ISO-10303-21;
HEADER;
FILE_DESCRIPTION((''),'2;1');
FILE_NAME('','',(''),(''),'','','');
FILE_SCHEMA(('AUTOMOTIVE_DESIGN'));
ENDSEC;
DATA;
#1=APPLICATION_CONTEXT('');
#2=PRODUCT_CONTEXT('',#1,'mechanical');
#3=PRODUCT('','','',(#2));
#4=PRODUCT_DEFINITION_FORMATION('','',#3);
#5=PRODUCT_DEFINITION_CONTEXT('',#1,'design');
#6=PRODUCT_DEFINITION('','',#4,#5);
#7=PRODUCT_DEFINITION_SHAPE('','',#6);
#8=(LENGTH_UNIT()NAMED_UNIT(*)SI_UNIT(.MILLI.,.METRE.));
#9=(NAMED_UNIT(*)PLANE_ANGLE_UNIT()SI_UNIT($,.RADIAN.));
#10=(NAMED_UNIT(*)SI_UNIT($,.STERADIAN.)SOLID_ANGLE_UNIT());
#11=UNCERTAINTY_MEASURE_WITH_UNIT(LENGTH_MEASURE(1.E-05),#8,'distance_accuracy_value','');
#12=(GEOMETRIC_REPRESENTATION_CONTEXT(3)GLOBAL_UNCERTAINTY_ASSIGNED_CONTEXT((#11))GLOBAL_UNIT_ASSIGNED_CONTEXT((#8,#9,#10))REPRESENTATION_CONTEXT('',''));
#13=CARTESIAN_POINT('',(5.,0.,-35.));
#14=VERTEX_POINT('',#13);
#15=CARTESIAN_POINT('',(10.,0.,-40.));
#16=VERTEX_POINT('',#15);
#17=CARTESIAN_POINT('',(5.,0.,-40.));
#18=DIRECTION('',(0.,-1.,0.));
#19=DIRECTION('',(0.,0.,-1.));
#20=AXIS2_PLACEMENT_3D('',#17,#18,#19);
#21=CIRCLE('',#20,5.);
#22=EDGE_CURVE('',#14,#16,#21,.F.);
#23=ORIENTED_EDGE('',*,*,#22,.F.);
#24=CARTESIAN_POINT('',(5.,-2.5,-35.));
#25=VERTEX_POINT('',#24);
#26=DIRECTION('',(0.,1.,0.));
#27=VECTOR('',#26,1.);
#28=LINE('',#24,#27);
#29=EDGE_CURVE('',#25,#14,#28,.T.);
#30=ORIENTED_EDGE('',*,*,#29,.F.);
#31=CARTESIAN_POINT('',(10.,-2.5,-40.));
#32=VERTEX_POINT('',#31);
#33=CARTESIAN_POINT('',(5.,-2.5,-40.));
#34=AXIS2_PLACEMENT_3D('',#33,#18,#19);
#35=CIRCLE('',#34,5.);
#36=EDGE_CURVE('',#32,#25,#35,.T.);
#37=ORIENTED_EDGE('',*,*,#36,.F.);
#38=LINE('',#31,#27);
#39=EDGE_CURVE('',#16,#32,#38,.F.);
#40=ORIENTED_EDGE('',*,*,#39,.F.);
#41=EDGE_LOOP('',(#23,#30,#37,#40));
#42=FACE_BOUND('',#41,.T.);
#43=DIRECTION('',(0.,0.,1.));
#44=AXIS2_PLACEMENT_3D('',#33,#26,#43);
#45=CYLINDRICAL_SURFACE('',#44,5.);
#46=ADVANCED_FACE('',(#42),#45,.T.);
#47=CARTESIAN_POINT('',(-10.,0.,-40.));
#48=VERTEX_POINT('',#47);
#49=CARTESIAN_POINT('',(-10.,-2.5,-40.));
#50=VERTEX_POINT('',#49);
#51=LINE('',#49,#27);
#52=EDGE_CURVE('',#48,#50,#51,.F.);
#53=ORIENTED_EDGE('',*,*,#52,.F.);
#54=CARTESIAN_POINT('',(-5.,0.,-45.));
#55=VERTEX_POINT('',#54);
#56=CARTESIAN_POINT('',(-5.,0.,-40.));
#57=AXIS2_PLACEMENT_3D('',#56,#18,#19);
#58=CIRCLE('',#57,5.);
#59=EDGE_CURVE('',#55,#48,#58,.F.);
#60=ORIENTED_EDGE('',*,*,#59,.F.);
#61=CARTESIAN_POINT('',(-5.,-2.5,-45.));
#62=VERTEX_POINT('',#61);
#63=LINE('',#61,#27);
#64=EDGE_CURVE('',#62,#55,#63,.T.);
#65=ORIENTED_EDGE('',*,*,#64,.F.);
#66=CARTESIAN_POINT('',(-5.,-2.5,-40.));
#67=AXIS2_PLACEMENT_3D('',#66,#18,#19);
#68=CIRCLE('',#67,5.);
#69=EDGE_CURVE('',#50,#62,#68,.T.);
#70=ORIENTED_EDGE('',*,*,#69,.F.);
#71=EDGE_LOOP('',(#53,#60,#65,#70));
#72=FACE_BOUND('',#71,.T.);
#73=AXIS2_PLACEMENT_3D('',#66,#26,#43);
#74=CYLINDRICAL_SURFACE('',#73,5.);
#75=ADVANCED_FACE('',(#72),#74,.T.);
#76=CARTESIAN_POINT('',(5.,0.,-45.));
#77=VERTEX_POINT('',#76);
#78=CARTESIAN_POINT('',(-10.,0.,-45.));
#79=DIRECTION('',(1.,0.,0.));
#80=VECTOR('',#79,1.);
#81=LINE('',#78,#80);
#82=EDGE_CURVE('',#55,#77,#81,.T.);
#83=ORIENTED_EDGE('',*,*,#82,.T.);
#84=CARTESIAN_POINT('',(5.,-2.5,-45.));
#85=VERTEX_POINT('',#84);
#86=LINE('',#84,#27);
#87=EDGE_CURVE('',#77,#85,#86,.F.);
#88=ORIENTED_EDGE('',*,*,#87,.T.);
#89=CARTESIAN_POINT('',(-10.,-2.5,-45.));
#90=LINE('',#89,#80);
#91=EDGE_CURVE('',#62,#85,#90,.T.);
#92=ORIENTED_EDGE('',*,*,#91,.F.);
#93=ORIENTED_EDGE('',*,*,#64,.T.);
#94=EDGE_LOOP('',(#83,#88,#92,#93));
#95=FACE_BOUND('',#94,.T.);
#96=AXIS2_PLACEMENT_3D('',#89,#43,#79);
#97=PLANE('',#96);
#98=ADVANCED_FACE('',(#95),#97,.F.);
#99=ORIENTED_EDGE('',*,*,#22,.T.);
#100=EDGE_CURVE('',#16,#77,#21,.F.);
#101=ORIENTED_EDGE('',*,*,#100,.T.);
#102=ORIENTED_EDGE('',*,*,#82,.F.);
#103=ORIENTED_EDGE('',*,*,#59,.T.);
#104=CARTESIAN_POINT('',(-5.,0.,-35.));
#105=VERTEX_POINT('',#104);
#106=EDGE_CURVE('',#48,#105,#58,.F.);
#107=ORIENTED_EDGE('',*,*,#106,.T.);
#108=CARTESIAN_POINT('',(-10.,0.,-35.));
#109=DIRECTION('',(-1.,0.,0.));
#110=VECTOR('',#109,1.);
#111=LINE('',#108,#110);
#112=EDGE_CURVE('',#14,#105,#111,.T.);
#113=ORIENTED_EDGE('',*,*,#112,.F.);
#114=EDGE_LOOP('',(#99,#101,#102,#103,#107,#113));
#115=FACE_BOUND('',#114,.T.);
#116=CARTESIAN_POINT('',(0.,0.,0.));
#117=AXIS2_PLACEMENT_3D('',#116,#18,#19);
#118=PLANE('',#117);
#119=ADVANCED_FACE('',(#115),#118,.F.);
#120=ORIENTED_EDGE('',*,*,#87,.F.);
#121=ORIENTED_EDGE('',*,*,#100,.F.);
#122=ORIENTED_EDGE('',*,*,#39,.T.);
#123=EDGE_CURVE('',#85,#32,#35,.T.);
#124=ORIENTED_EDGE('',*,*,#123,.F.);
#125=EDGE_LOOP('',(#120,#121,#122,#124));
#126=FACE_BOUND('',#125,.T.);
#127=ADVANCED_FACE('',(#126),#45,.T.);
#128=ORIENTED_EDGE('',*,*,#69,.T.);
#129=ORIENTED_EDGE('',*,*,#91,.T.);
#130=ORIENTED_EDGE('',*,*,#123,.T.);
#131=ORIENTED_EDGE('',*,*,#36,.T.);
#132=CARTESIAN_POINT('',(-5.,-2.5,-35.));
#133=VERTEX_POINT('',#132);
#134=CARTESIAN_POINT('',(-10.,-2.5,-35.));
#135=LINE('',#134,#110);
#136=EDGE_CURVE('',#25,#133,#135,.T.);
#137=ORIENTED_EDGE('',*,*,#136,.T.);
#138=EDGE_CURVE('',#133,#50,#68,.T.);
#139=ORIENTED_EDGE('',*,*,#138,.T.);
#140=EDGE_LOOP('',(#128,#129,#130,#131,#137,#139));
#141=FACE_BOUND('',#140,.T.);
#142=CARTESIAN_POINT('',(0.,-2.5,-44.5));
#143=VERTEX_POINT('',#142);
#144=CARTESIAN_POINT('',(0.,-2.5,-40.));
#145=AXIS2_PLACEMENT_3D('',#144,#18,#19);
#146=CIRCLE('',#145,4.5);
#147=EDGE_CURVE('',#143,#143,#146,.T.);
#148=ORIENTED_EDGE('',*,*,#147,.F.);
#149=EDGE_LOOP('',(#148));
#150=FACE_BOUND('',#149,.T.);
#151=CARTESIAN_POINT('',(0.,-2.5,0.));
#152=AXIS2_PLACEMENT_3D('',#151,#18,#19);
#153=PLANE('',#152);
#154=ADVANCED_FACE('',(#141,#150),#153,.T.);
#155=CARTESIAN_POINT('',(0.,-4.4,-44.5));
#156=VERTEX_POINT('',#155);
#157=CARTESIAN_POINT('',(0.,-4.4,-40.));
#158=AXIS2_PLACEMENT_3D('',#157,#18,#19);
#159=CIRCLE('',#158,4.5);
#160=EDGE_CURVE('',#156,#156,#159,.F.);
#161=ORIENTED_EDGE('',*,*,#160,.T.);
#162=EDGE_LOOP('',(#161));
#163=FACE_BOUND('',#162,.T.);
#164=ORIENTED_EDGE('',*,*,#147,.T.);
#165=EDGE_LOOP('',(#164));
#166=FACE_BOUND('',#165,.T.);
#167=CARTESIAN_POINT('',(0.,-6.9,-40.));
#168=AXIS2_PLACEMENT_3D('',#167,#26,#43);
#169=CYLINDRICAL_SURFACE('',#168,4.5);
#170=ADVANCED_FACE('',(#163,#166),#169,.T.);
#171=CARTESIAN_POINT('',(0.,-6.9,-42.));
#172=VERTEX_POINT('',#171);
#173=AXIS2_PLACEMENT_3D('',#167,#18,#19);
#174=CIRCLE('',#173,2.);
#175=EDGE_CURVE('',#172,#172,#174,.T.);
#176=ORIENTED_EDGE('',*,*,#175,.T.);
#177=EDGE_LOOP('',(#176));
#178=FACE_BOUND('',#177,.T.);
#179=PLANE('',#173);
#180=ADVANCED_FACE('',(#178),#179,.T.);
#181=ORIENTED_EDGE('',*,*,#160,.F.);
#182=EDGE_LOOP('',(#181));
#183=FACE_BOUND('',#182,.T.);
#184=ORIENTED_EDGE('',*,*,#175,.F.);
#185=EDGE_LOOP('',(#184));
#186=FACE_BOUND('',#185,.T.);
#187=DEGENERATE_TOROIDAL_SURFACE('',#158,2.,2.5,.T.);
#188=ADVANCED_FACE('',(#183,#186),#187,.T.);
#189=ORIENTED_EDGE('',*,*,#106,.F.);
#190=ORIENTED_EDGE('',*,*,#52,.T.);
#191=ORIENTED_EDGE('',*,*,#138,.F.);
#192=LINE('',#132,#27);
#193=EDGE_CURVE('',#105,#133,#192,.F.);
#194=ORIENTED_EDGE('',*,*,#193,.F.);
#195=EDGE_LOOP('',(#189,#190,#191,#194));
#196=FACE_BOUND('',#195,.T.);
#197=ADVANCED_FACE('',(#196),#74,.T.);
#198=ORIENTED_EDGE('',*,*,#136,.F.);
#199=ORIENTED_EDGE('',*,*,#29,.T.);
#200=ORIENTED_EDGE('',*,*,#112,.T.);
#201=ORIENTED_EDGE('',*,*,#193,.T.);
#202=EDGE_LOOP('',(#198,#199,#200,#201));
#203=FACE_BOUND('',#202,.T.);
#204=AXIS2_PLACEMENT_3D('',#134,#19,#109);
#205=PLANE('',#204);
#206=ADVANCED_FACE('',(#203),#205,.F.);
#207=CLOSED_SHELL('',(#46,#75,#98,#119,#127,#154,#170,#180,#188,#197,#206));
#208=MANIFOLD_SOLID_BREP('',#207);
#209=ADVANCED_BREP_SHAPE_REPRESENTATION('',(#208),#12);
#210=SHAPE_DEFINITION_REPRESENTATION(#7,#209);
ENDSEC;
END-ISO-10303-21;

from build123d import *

# Parameters (mm, degrees)
SKETCH2_W           = 20
SKETCH2_H           = 10
BOSS_EXTRUDE1_DEPTH = 2.5
FILLET1_R           = 5
SKETCH3_R           = 4.5
BOSS_EXTRUDE2_DEPTH = 4.4
FILLET2_R           = 2.5


with BuildPart() as part:
    # Sketch2 → Boss-Extrude1 (new body)
    with BuildSketch(Plane.XZ):
        with Locations((0, -40)):
            Rectangle(SKETCH2_W, SKETCH2_H)
    extrude(amount=BOSS_EXTRUDE1_DEPTH)

    # Fillet1
    fillet1_edges = [part.edges().sort_by_distance(p)[0] for p in [
        (-10, -1.25, -35),
        (-10, -1.25, -45),
        (10, -1.25, -45),
        (10, -1.25, -35),
    ]]
    fillet(fillet1_edges, radius=FILLET1_R - 0.0001)  # a hair under: the kernel refuses the full size

    # Sketch3 → Boss-Extrude2 (add)
    with BuildSketch(Plane.XZ.offset(2.5)):
        with Locations(Location((0, -40, 0), (0, 0, 270))):
            Circle(SKETCH3_R)
    extrude(amount=BOSS_EXTRUDE2_DEPTH)

    # Fillet2
    fillet2_edges = [part.edges().sort_by_distance(p)[0] for p in [
        (0, -6.9, -35.5),
    ]]
    fillet(fillet2_edges, radius=FILLET2_R)


solid = part.part
